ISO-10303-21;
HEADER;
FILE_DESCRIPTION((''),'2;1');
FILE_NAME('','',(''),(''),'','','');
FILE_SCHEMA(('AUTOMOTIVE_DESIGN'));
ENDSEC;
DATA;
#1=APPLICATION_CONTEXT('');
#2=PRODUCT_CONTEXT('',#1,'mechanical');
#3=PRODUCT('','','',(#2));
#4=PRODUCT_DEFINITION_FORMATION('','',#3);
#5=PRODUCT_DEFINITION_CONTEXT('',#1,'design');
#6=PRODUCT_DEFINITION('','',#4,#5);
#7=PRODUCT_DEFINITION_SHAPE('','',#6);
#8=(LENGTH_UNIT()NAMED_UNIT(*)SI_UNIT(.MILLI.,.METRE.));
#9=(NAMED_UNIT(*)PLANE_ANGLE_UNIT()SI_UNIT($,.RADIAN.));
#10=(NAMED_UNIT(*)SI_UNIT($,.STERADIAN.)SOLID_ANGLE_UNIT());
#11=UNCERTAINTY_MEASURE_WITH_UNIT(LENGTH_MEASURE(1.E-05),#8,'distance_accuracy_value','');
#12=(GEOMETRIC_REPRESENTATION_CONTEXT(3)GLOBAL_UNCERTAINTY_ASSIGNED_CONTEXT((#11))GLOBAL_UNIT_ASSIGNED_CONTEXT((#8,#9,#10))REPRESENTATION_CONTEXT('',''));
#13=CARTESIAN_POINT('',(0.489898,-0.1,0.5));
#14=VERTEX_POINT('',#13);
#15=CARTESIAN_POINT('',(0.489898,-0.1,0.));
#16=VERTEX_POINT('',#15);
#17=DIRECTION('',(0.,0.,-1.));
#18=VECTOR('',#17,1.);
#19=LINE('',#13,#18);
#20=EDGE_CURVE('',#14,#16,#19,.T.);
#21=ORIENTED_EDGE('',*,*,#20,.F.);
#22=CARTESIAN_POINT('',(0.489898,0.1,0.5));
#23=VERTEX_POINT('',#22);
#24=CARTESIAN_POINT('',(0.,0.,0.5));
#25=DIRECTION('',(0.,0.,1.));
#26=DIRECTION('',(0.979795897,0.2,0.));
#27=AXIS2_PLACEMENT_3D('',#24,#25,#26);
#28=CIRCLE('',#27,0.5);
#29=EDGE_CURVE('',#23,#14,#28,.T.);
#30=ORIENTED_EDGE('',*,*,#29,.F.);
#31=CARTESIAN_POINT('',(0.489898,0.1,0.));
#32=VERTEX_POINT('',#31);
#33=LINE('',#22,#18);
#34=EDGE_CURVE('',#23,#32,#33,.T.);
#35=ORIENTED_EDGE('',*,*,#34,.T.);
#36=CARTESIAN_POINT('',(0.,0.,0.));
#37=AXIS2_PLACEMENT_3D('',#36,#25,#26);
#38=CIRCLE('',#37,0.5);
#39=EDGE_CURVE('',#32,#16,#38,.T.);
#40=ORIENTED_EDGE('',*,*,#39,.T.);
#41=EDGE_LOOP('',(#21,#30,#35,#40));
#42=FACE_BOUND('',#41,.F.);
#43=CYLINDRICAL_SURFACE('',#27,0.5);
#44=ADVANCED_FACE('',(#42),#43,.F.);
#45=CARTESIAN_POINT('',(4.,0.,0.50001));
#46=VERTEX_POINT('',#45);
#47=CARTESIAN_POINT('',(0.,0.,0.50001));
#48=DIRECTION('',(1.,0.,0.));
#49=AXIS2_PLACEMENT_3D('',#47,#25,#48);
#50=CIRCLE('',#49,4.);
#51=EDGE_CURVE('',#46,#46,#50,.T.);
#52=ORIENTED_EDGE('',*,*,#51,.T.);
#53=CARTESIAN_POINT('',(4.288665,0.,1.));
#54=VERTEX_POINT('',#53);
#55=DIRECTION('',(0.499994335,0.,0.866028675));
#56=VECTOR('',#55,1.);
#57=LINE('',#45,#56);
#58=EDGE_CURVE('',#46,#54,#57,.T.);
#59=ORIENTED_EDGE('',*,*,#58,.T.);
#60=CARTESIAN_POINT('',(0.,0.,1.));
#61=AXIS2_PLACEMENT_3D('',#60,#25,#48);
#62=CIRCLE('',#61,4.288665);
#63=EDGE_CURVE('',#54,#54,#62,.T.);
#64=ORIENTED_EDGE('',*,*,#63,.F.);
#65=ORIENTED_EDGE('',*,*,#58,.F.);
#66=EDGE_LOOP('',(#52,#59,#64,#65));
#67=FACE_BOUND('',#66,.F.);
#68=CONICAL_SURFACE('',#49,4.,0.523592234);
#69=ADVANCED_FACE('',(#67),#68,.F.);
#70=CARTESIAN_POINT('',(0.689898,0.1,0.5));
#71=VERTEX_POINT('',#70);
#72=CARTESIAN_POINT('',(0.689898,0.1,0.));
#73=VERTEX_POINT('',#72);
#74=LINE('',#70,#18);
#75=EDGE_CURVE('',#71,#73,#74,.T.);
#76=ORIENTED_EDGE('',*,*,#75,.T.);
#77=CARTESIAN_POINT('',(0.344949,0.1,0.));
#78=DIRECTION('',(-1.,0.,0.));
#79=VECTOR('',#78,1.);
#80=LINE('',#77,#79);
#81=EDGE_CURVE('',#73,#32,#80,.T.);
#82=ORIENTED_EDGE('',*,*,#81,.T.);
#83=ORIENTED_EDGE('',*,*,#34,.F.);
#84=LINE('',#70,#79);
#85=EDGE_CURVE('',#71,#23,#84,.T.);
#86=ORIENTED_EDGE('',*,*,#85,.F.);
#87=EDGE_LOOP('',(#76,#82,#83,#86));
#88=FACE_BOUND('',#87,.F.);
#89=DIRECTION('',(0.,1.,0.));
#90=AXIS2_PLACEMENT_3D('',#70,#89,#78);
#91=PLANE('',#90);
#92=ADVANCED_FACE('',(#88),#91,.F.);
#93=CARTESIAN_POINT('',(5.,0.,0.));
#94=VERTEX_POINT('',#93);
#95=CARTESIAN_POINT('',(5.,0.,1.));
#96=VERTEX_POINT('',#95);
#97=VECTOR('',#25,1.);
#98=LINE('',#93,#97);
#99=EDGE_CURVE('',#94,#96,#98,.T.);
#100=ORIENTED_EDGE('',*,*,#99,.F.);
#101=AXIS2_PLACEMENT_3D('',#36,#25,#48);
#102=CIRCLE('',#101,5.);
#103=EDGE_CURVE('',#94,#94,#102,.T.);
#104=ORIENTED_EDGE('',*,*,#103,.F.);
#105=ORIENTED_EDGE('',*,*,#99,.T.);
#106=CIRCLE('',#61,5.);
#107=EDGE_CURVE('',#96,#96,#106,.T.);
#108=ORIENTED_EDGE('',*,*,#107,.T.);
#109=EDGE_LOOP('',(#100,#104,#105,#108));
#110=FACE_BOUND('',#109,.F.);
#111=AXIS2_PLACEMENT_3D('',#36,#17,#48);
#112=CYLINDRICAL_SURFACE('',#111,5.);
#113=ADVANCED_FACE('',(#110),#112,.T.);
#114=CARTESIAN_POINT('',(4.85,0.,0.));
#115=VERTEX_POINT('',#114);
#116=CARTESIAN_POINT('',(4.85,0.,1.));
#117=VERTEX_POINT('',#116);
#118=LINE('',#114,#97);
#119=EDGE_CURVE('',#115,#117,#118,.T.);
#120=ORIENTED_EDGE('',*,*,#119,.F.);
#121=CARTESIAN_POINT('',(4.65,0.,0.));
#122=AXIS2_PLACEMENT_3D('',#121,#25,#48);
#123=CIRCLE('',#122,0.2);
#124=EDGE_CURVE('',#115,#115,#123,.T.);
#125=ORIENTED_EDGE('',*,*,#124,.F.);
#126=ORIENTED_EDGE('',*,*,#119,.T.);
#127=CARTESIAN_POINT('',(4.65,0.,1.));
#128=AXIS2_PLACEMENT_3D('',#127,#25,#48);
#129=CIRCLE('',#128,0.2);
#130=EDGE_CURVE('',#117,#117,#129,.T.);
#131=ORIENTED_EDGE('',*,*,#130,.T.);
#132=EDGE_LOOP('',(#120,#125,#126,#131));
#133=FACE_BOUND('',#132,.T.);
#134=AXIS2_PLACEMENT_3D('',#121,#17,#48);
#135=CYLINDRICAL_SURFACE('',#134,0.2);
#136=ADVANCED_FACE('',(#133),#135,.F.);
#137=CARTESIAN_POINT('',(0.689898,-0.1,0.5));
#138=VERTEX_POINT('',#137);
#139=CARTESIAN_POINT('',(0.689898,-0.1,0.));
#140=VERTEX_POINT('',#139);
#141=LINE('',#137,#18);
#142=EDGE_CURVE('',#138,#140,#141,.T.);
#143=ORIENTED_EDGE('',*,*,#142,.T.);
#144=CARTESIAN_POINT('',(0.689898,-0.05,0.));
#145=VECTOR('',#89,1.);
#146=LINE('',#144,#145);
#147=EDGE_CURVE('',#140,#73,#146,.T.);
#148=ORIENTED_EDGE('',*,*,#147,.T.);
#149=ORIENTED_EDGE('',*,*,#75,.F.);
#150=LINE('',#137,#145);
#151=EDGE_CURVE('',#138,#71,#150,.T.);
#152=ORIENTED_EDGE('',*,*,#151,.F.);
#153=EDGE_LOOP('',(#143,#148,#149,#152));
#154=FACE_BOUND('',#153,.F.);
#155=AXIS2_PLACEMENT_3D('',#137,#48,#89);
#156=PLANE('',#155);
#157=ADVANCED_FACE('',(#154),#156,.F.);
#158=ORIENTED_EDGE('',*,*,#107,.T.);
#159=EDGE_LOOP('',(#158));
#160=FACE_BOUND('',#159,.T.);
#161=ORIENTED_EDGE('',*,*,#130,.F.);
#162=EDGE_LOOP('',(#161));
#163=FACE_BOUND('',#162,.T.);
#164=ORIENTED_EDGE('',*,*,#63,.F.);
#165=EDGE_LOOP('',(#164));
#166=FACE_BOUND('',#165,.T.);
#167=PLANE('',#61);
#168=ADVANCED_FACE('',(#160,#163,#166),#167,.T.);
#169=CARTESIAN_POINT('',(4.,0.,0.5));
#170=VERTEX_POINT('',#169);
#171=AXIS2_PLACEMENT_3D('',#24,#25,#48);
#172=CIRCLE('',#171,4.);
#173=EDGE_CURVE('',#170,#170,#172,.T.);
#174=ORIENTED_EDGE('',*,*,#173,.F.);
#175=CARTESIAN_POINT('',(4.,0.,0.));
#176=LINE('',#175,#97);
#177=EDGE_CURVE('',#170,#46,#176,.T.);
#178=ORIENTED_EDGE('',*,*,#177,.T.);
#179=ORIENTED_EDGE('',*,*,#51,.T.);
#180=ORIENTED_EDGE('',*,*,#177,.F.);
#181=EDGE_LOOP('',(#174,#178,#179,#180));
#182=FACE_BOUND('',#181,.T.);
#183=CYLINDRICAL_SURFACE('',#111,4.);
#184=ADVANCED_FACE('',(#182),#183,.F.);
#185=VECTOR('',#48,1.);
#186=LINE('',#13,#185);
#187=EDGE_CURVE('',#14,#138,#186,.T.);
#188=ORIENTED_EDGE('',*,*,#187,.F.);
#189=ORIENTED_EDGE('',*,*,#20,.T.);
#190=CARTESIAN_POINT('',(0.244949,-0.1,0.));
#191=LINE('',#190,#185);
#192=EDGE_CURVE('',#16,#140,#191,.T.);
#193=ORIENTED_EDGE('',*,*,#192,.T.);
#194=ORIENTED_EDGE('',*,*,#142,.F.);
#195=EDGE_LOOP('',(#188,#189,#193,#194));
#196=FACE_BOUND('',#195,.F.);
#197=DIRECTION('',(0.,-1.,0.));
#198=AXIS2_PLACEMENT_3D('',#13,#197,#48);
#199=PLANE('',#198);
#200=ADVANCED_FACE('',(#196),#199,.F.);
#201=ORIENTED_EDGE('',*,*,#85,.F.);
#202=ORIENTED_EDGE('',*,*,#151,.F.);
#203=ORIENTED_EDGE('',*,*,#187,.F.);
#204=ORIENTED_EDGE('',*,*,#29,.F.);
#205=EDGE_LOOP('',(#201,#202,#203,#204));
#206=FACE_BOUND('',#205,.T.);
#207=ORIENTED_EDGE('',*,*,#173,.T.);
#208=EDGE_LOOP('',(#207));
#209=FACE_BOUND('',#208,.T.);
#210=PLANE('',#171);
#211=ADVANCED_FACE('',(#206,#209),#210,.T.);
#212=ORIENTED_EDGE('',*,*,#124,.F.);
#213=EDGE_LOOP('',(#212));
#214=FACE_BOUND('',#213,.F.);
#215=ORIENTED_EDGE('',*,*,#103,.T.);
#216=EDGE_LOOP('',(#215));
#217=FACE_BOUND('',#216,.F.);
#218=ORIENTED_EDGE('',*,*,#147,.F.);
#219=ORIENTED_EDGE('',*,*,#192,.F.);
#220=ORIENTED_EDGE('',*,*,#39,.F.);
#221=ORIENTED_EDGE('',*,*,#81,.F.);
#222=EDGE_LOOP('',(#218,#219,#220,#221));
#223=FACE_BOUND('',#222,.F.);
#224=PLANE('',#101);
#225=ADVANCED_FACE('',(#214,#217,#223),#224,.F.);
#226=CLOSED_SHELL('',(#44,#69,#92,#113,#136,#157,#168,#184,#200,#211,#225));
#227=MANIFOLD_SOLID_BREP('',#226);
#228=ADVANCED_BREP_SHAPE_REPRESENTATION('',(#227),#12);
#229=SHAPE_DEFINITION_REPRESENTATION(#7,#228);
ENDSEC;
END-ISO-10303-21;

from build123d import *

# Parameters (mm, degrees)
F0_R     = 5
F0_R_2   = 4
F0_R_3   = 0.2
F1_DEPTH = 1
F2_DEPTH = 0.5
F4_DEPTH = 25
F5_SIZE2 = 0.288665
F5_SIZE  = 0.49999


# Not quite as in the source:
# - a fillet or chamfer is up to 0.001 mm smaller than in the source, because OpenCascade refuses the exact size


with BuildPart() as f1:
    # F0 (on Top) → F1 (new body)
    with BuildSketch(Plane.XY):
        Circle(F0_R)
        Circle(F0_R_2, mode=Mode.SUBTRACT)
        with Locations((4.65, 0)):
            Circle(F0_R_3, mode=Mode.SUBTRACT)
    extrude(amount=F1_DEPTH)

    # F0 (on Top) → F2 (join)
    with BuildSketch(Plane.XY):
        Circle(F0_R_2)
    extrude(amount=F2_DEPTH)

    # F3 (on face) → F4 (cut)
    with BuildSketch(Plane.XY.offset(0.5)):
        with BuildLine():
            ThreePointArc((0.4898979486, -0.1), (0.4974680765, -0.050254481), (0.5, 0))
            ThreePointArc((0.5, 0), (0.4974680765, 0.050254481), (0.4898979486, 0.1))
            ThreePointArc((0.4898979486, 0.1), (-0.5, 0), (0.4898979486, -0.1))
        make_face()
        with BuildLine():
            ThreePointArc((0.4898979486, 0.1), (0.4974680765, 0.050254481), (0.5, 0))
            ThreePointArc((0.5, 0), (0.4974680765, -0.050254481), (0.4898979486, -0.1))
            Line((0.4898979486, -0.1), (0.6898979486, -0.1))
            Line((0.6898979486, -0.1), (0.6898979486, 0))
            Line((0.6898979486, 0), (0.6898979486, 0.1))
            Line((0.6898979486, 0.1), (0.4898979486, 0.1))
        make_face()
    extrude(amount=-F4_DEPTH, mode=Mode.SUBTRACT)

    # F5 (size 0.5 and 0.2886751346 in the source; OpenCascade refuses exactly that, so slightly less here)
    f5_edges = [f1.edges().sort_by_distance(p)[0] for p in [
        (-4, 0, 1),
    ]]
    f5_side = f1.faces().sort_by_distance((-4, 0, 0.75))[0]
    chamfer(f5_edges, length=F5_SIZE, length2=F5_SIZE2, reference=f5_side)


solid = f1.part
